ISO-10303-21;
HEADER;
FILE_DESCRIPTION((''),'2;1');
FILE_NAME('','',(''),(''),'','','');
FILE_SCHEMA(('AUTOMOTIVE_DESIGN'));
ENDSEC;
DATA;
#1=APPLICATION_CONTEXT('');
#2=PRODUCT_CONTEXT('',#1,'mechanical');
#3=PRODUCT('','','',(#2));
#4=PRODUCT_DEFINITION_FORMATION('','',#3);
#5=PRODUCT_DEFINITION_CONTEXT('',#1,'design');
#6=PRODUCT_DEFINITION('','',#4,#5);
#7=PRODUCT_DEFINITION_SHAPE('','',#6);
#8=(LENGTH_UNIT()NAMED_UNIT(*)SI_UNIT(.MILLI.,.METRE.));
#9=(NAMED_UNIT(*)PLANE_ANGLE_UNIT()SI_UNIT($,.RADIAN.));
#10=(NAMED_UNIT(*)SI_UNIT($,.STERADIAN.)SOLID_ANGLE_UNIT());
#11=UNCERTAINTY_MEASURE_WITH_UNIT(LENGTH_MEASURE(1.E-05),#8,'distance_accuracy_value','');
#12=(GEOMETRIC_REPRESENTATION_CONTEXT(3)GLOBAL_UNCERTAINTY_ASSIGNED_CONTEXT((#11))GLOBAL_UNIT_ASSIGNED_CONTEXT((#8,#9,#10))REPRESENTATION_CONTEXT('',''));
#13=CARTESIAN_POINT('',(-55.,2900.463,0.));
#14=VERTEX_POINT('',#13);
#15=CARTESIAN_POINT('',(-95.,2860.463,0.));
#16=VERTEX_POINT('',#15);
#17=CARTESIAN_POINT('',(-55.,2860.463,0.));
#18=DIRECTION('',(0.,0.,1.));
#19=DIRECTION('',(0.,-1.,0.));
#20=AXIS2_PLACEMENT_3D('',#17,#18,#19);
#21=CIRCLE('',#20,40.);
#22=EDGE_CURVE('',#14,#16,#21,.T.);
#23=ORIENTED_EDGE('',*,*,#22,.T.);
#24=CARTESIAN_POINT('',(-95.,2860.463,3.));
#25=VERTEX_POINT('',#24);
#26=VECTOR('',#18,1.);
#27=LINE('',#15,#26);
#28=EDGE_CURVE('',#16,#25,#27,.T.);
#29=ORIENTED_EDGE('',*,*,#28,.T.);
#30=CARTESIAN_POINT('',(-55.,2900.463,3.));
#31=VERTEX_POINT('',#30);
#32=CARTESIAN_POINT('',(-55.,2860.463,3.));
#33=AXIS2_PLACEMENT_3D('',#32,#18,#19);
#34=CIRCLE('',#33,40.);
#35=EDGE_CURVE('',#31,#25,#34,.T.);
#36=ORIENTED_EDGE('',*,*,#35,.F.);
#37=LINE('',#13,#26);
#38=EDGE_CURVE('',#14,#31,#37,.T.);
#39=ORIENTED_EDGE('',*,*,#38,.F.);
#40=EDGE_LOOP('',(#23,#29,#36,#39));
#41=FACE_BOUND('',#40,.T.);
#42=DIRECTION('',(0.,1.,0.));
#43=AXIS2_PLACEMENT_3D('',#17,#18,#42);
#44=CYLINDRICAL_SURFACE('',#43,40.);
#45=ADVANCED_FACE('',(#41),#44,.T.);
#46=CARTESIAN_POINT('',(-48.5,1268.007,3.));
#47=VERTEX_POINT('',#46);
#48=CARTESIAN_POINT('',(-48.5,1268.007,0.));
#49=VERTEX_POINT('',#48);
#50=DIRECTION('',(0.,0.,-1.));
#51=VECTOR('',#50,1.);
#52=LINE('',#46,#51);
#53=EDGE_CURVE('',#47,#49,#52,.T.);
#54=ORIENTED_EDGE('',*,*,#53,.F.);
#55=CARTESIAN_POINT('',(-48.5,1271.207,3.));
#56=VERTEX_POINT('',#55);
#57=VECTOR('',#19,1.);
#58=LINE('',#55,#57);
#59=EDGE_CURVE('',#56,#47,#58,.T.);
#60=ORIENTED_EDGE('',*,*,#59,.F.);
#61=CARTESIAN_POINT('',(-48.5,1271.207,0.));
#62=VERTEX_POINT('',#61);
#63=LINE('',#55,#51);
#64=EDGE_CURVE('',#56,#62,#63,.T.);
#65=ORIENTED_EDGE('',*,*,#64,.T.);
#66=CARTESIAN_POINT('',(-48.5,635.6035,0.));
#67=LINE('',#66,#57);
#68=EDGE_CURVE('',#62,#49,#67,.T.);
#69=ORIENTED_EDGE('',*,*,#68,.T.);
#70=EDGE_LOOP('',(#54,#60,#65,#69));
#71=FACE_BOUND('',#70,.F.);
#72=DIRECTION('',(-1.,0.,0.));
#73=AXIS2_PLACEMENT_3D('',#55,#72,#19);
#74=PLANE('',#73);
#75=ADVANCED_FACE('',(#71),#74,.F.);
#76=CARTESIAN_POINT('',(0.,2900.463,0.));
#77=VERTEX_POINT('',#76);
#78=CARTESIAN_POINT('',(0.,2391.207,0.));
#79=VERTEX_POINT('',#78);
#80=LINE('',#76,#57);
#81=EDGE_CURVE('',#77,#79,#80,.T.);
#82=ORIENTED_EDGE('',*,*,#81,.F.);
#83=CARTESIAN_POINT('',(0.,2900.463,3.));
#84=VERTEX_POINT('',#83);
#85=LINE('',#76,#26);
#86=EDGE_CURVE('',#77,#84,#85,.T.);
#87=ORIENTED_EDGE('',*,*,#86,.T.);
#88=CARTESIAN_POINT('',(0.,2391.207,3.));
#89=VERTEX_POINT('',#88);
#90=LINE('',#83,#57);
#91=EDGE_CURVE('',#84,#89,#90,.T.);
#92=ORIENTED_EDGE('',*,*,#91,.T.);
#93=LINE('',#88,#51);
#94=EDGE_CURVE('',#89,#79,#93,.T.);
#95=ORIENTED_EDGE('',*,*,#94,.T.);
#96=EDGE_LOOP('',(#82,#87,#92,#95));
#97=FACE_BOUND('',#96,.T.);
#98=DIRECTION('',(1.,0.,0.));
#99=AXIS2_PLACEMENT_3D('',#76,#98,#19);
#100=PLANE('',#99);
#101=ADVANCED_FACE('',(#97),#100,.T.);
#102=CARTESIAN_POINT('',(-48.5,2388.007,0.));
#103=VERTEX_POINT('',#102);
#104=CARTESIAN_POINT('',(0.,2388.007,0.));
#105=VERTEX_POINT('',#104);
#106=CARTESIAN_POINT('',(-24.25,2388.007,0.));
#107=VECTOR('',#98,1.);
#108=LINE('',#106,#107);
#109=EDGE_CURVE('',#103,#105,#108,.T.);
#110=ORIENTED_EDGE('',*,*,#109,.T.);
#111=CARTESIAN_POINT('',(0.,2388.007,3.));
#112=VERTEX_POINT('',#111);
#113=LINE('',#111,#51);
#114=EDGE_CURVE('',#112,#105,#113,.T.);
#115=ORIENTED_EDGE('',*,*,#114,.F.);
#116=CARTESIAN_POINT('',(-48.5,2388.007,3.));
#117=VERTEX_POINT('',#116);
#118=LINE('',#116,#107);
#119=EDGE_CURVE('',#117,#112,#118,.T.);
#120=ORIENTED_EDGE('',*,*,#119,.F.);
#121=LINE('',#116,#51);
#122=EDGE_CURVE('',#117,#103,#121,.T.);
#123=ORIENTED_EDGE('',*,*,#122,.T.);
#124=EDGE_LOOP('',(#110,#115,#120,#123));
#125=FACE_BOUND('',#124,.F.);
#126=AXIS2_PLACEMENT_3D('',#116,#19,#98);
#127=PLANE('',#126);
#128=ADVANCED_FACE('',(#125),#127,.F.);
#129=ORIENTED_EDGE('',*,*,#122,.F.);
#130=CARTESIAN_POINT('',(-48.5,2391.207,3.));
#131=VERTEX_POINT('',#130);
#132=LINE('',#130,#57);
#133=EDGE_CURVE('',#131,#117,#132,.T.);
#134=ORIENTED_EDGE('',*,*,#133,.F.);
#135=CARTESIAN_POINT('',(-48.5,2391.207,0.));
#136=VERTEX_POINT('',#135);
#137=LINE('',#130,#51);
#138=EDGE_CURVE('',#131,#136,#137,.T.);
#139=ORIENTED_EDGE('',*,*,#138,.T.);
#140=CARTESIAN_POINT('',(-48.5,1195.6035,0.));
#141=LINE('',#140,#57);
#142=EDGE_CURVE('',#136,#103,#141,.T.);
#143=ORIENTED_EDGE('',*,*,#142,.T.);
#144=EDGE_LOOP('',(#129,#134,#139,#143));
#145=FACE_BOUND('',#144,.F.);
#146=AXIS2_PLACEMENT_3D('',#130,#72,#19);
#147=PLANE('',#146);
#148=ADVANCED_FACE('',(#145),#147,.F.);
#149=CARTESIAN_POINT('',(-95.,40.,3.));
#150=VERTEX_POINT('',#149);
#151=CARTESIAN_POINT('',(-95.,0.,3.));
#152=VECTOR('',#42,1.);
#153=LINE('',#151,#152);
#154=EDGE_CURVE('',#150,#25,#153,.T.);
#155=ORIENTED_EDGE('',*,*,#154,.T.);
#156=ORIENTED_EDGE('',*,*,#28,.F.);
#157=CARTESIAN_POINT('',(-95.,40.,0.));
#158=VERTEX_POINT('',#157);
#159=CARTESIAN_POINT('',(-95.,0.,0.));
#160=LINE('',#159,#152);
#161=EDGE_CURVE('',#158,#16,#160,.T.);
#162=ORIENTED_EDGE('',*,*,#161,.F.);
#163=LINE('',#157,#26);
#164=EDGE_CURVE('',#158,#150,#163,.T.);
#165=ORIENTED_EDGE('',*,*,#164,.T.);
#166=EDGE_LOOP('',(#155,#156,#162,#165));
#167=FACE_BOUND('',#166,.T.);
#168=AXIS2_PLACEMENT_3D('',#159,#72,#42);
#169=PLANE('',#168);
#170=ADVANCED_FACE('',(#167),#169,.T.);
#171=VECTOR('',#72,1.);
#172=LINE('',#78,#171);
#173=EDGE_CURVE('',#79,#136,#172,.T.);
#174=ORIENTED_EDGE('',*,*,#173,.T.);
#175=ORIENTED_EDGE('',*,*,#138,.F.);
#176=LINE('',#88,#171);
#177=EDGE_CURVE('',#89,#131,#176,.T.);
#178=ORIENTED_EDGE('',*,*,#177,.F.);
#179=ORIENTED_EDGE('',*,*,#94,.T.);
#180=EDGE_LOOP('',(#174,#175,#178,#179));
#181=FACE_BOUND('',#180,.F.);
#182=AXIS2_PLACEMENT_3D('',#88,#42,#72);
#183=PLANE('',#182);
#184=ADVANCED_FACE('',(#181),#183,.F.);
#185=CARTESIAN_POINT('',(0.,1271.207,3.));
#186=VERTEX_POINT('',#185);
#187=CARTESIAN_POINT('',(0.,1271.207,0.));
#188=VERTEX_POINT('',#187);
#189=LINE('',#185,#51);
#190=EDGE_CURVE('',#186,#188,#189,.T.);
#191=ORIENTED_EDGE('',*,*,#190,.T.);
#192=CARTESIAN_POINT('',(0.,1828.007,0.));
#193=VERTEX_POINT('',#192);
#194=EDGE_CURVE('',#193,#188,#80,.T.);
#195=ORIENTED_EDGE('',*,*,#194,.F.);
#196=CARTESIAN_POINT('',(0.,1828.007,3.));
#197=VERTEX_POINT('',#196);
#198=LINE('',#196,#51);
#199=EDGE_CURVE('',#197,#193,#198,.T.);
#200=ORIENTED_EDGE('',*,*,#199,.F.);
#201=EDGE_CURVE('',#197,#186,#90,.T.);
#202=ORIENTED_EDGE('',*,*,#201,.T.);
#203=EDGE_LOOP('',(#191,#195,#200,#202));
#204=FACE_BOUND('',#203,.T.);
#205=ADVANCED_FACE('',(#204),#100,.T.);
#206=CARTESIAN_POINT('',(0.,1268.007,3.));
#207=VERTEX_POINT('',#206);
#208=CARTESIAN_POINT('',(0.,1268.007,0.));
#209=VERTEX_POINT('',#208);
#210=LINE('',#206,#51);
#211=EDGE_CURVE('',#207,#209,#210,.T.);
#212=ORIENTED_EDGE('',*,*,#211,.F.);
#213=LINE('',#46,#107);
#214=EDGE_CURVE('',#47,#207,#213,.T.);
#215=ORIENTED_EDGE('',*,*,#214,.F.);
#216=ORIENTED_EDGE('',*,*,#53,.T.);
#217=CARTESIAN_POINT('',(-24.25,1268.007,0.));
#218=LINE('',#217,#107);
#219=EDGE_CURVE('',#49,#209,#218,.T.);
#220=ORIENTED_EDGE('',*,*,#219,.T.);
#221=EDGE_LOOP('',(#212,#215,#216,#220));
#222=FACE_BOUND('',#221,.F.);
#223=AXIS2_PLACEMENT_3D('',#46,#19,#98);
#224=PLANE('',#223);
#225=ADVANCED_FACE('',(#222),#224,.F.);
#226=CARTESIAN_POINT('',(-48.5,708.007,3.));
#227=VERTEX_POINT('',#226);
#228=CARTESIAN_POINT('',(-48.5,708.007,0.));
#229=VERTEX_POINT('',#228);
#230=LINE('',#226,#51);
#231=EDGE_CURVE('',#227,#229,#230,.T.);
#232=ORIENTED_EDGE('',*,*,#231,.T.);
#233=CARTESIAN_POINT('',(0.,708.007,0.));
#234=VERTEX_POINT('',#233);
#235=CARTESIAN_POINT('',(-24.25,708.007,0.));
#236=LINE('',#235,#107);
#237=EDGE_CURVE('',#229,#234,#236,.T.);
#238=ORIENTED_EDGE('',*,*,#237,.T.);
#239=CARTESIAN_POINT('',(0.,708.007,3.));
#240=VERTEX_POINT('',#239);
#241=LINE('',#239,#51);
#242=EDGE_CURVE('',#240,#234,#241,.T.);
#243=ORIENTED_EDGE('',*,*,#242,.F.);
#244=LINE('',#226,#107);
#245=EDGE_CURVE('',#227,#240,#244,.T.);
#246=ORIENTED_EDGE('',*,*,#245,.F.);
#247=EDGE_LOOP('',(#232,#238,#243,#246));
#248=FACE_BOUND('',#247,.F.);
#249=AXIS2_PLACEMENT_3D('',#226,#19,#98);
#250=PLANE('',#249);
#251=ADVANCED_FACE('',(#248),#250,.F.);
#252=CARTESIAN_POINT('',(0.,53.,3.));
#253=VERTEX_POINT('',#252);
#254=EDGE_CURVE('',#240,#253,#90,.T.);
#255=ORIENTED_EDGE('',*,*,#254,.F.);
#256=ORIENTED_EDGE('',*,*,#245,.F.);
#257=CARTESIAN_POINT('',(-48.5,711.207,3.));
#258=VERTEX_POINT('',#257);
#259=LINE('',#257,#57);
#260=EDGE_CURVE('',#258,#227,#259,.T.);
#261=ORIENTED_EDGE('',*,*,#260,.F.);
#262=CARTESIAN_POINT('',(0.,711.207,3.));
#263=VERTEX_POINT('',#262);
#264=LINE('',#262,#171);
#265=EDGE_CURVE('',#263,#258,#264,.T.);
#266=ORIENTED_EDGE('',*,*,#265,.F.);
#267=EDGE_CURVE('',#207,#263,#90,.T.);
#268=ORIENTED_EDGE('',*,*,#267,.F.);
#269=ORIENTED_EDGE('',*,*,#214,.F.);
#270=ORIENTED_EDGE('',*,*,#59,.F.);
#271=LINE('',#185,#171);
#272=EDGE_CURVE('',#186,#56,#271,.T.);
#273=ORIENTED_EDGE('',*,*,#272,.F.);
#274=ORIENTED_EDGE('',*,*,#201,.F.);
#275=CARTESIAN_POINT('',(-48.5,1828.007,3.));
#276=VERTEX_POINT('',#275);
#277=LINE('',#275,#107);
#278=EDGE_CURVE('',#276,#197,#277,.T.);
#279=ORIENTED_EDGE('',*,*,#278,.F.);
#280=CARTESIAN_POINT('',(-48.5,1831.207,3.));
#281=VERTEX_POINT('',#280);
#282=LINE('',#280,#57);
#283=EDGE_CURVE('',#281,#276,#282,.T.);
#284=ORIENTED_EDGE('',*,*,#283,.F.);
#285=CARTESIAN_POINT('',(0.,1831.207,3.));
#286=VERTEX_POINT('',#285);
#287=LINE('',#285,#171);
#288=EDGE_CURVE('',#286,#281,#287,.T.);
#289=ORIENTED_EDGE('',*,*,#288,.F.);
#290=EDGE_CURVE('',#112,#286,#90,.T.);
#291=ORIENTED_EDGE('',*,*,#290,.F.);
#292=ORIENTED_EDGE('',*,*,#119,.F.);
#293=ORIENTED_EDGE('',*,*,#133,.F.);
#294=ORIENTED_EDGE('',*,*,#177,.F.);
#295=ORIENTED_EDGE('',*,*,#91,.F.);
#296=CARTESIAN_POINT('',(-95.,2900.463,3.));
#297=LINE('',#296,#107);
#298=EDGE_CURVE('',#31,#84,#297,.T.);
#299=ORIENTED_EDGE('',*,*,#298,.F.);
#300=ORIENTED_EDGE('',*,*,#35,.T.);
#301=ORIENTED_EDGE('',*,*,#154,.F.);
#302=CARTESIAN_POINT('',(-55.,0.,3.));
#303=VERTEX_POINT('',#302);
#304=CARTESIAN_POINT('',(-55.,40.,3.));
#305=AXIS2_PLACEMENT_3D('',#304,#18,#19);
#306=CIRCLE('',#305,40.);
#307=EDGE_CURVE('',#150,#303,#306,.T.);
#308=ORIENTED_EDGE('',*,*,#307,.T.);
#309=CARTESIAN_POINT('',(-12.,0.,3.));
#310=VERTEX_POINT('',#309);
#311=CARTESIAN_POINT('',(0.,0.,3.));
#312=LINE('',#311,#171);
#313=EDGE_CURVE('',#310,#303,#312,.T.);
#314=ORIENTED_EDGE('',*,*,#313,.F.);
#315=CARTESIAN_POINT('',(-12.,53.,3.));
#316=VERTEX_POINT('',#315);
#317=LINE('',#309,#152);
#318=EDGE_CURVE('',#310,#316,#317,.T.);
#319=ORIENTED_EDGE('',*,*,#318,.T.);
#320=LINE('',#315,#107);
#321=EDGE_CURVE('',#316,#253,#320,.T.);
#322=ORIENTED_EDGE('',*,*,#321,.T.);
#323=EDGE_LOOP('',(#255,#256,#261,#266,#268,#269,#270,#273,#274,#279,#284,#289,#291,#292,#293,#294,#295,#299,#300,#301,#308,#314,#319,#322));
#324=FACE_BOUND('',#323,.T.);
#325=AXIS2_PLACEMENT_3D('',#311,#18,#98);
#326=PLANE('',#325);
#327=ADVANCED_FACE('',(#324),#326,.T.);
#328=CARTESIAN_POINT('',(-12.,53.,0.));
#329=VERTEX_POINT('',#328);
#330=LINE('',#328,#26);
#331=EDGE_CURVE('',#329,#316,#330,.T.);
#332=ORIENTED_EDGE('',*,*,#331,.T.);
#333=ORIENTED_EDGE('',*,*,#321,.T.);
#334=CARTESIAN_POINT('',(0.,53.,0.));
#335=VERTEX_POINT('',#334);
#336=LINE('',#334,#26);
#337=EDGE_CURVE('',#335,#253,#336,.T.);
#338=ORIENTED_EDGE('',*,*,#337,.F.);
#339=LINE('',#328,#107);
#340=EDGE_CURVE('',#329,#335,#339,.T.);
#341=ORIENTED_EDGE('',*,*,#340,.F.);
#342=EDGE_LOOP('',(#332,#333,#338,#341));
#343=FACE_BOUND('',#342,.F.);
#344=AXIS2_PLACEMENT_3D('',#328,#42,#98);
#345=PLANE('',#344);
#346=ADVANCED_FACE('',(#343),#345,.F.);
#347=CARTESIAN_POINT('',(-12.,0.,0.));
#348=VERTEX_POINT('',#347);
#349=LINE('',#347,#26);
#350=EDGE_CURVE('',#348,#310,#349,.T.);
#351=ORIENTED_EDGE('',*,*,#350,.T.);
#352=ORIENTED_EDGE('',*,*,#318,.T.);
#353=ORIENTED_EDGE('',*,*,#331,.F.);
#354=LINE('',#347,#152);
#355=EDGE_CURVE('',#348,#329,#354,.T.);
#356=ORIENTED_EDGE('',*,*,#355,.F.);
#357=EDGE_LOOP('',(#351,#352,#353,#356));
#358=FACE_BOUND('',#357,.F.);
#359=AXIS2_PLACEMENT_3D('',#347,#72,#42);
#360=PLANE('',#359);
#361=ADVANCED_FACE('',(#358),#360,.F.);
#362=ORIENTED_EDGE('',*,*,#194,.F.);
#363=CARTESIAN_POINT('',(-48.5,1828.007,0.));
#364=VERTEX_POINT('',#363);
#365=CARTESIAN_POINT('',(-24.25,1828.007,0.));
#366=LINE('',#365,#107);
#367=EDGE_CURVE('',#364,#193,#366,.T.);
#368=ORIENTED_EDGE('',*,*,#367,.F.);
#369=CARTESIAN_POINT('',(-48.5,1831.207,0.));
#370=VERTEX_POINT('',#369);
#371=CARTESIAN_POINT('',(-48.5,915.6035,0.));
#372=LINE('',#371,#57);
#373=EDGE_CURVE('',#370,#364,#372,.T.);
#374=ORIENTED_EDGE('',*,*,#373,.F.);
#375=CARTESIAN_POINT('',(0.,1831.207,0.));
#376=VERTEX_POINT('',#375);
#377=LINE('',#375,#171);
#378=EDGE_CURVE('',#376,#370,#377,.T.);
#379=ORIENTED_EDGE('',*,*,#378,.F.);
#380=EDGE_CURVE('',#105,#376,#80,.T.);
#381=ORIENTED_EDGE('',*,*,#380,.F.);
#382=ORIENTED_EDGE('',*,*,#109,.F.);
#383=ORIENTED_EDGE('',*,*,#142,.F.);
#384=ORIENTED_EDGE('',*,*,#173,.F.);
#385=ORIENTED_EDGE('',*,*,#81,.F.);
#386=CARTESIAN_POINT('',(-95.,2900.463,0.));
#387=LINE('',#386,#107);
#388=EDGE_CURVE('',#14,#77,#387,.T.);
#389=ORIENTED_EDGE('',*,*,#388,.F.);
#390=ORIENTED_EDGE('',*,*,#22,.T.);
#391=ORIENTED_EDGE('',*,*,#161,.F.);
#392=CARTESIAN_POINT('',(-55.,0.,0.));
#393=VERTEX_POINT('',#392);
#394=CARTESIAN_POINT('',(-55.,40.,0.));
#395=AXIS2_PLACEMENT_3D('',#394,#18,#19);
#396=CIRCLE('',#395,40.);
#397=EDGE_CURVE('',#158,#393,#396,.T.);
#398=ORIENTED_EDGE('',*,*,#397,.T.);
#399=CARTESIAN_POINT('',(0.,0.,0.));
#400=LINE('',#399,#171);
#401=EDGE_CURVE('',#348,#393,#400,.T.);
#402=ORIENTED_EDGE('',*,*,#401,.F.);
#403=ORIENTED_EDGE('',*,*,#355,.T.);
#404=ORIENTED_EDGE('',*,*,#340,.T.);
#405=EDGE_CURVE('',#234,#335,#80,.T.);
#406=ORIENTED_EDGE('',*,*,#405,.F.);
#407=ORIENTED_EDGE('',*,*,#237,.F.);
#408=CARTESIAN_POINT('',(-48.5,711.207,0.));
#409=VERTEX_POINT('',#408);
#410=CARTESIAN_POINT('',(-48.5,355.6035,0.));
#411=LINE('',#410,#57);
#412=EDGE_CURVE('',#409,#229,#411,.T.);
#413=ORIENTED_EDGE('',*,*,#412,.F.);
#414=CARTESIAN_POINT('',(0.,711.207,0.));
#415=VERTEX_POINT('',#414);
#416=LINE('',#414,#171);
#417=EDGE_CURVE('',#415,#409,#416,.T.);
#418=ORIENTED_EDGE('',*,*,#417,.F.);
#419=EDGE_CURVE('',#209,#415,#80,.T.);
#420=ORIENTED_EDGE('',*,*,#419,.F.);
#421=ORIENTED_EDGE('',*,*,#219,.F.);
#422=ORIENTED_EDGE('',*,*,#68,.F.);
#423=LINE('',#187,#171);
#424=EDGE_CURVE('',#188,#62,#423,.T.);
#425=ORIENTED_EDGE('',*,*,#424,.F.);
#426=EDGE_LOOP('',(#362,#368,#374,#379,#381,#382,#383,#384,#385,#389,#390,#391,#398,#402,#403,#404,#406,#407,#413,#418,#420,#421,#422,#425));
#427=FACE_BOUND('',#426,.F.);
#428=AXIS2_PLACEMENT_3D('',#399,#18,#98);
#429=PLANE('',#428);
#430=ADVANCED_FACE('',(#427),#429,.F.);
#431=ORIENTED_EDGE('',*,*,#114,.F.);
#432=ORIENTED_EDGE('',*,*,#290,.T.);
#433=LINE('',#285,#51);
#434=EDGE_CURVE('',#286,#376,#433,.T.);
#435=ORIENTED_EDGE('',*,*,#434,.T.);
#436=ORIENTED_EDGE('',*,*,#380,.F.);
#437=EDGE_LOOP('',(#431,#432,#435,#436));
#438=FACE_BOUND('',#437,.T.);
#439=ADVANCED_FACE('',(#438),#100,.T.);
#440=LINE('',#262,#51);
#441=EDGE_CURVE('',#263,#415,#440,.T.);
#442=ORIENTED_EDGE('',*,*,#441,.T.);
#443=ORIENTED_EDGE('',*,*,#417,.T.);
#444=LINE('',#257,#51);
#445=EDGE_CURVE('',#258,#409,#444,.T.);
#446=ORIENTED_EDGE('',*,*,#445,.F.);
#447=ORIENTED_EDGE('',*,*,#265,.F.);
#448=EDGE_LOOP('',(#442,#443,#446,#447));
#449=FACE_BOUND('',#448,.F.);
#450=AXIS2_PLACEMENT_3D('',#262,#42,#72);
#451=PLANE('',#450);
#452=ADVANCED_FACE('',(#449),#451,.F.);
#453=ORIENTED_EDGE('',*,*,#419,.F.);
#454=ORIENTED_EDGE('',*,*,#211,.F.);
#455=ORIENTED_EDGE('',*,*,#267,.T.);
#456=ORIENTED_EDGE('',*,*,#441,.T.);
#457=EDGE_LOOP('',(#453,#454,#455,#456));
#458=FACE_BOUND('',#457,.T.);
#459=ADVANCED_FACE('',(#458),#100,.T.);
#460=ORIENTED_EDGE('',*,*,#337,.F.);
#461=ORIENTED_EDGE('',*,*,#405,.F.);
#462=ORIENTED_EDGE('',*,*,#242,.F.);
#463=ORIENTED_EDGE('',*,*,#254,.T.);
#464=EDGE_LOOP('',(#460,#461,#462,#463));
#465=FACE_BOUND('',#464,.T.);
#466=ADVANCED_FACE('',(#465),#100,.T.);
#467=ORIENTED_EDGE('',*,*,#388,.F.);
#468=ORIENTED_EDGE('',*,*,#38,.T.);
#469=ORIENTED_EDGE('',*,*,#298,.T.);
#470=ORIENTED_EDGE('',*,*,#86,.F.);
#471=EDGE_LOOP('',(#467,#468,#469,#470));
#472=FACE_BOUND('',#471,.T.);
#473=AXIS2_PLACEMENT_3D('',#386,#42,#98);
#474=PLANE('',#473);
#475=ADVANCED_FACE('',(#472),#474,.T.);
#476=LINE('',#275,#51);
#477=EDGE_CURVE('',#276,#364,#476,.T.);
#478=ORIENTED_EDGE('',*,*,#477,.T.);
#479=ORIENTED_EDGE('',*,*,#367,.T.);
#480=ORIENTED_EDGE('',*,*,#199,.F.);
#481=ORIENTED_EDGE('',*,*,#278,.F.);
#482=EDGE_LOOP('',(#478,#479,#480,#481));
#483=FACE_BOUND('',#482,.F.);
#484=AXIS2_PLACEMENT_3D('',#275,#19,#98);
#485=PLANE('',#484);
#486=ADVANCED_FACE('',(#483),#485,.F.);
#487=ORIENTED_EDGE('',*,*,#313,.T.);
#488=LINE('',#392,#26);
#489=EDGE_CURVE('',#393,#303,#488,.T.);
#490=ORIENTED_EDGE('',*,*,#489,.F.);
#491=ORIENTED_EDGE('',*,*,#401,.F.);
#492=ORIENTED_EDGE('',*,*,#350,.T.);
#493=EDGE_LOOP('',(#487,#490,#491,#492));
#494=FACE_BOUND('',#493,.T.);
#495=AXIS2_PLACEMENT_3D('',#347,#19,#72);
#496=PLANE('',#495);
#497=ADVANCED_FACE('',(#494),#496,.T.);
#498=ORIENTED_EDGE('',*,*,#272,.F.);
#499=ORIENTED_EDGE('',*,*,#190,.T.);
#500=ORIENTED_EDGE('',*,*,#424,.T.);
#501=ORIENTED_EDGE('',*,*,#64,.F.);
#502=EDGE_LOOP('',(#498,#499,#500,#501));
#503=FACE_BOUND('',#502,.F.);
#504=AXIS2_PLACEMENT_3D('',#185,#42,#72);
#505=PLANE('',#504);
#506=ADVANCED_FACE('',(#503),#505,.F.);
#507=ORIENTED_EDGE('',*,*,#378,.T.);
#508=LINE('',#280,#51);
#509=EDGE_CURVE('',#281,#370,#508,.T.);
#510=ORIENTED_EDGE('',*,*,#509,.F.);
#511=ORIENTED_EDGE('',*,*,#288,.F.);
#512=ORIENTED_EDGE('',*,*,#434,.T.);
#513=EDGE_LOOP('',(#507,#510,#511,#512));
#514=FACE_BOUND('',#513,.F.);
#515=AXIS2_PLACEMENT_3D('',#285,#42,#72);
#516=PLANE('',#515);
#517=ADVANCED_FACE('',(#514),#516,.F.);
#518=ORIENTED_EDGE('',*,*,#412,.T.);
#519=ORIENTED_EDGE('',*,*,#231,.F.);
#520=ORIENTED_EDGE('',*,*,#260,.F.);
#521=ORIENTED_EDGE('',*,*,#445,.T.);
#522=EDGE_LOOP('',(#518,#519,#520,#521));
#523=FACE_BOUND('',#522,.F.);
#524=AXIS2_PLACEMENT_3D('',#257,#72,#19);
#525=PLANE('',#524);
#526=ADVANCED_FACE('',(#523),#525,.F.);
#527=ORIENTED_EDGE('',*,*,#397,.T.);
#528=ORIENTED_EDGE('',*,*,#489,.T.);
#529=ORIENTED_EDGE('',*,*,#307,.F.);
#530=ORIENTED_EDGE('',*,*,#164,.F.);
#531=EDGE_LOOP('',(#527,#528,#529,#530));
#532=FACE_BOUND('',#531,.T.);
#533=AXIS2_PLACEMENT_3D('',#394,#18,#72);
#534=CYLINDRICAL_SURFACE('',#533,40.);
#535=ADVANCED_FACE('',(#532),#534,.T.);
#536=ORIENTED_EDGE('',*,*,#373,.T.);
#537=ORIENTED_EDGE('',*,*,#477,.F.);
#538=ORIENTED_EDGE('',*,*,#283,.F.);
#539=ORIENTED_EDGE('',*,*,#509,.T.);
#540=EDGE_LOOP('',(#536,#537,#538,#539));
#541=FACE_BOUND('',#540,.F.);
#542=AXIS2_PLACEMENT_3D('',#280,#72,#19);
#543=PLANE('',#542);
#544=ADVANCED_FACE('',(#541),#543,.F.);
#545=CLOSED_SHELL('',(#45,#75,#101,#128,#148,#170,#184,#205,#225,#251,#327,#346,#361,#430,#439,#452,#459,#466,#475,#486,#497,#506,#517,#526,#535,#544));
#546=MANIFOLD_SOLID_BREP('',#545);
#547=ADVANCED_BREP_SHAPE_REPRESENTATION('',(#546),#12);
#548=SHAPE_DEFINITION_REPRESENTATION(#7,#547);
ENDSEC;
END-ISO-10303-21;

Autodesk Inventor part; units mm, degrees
ref_plane "YZ Plane" through (0, 0, 0) normal (1, 0, 0) x (0, 1, 0)
ref_plane "XZ Plane" through (0, 0, 0) normal (0, 1, 0) x (-1, 0, 0)
ref_plane "XY Plane" through (0, 0, 0) normal (0, 0, 1) x (1, 0, 0)
sketch "Sketch1" plane through (0, 0, 0) normal (0, 0, 1) x (1, 0, 0)
  line L0 (-95, 2900.463) -> (0, 2900.463)
  line L1 (0, 2900.463) -> (0, 0)
  line L2 (0, 0) -> (-95, 0)
  line L3 (-95, 0) -> (-95, 2900.463)
  line L4 (-12, 53) -> (0, 53)
  line L5 (0, 53) -> (0, 0)
  line L6 (0, 0) -> (-12, 0)
  line L7 (-12, 0) -> (-12, 53)
  point P0 (-12, 0)
  dimension "d0" = 95
  dimension "d1" = 2900.463
  dimension "d10" = 12
  dimension "d11" = 53
extrude "Plate1" add sketch "Sketch1" along normal blind 3 contours L0 L1 L4 L7 L2 L3
sketch "Sketch2" plane through (0, 0, 3) normal (0, 0, 1) x (1, 0, 0)
  line L0 (0, 0) -> (0, 2900.463) projected
  line L1 (0, 2391.207) -> (-48.5, 2391.207)
  line L2 (-48.5, 2391.207) -> (-48.5, 2388.007)
  line L3 (-48.5, 2388.007) -> (0, 2388.007)
  line L4 (0, 2388.007) -> (0, 2391.207)
  point P0 (0, 2388.007)
  dimension "d3" = 509.256
  dimension "d4" = 3.2
  dimension "d5" = 48.5
extrude "Extrusion1" cut sketch "Sketch2" against normal through all
pattern_linear "Rectangular Pattern1" count 4 spacing 560 along (0, -1, 0) of "Extrusion1"
fillet "Corner Round1" radius 40 2 edges at (-95, 2900.463, 1.5) (-95, 0, 1.5)
equation "\"d2\" = Thickness"
equation "\"BendReliefWidth\" = Thickness"
equation "\"BendReliefDepth\" = 0.5 * Thickness"
equation "\"CornerReliefSize\" = 4 * Thickness"
equation "\"MinimumRemnant\" = 2 * Thickness"
equation "\"TransitionRadius\" = BendRadius"
equation "\"JacobiRadiusSize\" = BendRadius"
equation "\"GapSize\" = Thickness"
equation "\"Thickness\" = 3"
equation "\"BendRadius\" = 5"
properties part number "BSH 023 rib butt end" material "Steel"
